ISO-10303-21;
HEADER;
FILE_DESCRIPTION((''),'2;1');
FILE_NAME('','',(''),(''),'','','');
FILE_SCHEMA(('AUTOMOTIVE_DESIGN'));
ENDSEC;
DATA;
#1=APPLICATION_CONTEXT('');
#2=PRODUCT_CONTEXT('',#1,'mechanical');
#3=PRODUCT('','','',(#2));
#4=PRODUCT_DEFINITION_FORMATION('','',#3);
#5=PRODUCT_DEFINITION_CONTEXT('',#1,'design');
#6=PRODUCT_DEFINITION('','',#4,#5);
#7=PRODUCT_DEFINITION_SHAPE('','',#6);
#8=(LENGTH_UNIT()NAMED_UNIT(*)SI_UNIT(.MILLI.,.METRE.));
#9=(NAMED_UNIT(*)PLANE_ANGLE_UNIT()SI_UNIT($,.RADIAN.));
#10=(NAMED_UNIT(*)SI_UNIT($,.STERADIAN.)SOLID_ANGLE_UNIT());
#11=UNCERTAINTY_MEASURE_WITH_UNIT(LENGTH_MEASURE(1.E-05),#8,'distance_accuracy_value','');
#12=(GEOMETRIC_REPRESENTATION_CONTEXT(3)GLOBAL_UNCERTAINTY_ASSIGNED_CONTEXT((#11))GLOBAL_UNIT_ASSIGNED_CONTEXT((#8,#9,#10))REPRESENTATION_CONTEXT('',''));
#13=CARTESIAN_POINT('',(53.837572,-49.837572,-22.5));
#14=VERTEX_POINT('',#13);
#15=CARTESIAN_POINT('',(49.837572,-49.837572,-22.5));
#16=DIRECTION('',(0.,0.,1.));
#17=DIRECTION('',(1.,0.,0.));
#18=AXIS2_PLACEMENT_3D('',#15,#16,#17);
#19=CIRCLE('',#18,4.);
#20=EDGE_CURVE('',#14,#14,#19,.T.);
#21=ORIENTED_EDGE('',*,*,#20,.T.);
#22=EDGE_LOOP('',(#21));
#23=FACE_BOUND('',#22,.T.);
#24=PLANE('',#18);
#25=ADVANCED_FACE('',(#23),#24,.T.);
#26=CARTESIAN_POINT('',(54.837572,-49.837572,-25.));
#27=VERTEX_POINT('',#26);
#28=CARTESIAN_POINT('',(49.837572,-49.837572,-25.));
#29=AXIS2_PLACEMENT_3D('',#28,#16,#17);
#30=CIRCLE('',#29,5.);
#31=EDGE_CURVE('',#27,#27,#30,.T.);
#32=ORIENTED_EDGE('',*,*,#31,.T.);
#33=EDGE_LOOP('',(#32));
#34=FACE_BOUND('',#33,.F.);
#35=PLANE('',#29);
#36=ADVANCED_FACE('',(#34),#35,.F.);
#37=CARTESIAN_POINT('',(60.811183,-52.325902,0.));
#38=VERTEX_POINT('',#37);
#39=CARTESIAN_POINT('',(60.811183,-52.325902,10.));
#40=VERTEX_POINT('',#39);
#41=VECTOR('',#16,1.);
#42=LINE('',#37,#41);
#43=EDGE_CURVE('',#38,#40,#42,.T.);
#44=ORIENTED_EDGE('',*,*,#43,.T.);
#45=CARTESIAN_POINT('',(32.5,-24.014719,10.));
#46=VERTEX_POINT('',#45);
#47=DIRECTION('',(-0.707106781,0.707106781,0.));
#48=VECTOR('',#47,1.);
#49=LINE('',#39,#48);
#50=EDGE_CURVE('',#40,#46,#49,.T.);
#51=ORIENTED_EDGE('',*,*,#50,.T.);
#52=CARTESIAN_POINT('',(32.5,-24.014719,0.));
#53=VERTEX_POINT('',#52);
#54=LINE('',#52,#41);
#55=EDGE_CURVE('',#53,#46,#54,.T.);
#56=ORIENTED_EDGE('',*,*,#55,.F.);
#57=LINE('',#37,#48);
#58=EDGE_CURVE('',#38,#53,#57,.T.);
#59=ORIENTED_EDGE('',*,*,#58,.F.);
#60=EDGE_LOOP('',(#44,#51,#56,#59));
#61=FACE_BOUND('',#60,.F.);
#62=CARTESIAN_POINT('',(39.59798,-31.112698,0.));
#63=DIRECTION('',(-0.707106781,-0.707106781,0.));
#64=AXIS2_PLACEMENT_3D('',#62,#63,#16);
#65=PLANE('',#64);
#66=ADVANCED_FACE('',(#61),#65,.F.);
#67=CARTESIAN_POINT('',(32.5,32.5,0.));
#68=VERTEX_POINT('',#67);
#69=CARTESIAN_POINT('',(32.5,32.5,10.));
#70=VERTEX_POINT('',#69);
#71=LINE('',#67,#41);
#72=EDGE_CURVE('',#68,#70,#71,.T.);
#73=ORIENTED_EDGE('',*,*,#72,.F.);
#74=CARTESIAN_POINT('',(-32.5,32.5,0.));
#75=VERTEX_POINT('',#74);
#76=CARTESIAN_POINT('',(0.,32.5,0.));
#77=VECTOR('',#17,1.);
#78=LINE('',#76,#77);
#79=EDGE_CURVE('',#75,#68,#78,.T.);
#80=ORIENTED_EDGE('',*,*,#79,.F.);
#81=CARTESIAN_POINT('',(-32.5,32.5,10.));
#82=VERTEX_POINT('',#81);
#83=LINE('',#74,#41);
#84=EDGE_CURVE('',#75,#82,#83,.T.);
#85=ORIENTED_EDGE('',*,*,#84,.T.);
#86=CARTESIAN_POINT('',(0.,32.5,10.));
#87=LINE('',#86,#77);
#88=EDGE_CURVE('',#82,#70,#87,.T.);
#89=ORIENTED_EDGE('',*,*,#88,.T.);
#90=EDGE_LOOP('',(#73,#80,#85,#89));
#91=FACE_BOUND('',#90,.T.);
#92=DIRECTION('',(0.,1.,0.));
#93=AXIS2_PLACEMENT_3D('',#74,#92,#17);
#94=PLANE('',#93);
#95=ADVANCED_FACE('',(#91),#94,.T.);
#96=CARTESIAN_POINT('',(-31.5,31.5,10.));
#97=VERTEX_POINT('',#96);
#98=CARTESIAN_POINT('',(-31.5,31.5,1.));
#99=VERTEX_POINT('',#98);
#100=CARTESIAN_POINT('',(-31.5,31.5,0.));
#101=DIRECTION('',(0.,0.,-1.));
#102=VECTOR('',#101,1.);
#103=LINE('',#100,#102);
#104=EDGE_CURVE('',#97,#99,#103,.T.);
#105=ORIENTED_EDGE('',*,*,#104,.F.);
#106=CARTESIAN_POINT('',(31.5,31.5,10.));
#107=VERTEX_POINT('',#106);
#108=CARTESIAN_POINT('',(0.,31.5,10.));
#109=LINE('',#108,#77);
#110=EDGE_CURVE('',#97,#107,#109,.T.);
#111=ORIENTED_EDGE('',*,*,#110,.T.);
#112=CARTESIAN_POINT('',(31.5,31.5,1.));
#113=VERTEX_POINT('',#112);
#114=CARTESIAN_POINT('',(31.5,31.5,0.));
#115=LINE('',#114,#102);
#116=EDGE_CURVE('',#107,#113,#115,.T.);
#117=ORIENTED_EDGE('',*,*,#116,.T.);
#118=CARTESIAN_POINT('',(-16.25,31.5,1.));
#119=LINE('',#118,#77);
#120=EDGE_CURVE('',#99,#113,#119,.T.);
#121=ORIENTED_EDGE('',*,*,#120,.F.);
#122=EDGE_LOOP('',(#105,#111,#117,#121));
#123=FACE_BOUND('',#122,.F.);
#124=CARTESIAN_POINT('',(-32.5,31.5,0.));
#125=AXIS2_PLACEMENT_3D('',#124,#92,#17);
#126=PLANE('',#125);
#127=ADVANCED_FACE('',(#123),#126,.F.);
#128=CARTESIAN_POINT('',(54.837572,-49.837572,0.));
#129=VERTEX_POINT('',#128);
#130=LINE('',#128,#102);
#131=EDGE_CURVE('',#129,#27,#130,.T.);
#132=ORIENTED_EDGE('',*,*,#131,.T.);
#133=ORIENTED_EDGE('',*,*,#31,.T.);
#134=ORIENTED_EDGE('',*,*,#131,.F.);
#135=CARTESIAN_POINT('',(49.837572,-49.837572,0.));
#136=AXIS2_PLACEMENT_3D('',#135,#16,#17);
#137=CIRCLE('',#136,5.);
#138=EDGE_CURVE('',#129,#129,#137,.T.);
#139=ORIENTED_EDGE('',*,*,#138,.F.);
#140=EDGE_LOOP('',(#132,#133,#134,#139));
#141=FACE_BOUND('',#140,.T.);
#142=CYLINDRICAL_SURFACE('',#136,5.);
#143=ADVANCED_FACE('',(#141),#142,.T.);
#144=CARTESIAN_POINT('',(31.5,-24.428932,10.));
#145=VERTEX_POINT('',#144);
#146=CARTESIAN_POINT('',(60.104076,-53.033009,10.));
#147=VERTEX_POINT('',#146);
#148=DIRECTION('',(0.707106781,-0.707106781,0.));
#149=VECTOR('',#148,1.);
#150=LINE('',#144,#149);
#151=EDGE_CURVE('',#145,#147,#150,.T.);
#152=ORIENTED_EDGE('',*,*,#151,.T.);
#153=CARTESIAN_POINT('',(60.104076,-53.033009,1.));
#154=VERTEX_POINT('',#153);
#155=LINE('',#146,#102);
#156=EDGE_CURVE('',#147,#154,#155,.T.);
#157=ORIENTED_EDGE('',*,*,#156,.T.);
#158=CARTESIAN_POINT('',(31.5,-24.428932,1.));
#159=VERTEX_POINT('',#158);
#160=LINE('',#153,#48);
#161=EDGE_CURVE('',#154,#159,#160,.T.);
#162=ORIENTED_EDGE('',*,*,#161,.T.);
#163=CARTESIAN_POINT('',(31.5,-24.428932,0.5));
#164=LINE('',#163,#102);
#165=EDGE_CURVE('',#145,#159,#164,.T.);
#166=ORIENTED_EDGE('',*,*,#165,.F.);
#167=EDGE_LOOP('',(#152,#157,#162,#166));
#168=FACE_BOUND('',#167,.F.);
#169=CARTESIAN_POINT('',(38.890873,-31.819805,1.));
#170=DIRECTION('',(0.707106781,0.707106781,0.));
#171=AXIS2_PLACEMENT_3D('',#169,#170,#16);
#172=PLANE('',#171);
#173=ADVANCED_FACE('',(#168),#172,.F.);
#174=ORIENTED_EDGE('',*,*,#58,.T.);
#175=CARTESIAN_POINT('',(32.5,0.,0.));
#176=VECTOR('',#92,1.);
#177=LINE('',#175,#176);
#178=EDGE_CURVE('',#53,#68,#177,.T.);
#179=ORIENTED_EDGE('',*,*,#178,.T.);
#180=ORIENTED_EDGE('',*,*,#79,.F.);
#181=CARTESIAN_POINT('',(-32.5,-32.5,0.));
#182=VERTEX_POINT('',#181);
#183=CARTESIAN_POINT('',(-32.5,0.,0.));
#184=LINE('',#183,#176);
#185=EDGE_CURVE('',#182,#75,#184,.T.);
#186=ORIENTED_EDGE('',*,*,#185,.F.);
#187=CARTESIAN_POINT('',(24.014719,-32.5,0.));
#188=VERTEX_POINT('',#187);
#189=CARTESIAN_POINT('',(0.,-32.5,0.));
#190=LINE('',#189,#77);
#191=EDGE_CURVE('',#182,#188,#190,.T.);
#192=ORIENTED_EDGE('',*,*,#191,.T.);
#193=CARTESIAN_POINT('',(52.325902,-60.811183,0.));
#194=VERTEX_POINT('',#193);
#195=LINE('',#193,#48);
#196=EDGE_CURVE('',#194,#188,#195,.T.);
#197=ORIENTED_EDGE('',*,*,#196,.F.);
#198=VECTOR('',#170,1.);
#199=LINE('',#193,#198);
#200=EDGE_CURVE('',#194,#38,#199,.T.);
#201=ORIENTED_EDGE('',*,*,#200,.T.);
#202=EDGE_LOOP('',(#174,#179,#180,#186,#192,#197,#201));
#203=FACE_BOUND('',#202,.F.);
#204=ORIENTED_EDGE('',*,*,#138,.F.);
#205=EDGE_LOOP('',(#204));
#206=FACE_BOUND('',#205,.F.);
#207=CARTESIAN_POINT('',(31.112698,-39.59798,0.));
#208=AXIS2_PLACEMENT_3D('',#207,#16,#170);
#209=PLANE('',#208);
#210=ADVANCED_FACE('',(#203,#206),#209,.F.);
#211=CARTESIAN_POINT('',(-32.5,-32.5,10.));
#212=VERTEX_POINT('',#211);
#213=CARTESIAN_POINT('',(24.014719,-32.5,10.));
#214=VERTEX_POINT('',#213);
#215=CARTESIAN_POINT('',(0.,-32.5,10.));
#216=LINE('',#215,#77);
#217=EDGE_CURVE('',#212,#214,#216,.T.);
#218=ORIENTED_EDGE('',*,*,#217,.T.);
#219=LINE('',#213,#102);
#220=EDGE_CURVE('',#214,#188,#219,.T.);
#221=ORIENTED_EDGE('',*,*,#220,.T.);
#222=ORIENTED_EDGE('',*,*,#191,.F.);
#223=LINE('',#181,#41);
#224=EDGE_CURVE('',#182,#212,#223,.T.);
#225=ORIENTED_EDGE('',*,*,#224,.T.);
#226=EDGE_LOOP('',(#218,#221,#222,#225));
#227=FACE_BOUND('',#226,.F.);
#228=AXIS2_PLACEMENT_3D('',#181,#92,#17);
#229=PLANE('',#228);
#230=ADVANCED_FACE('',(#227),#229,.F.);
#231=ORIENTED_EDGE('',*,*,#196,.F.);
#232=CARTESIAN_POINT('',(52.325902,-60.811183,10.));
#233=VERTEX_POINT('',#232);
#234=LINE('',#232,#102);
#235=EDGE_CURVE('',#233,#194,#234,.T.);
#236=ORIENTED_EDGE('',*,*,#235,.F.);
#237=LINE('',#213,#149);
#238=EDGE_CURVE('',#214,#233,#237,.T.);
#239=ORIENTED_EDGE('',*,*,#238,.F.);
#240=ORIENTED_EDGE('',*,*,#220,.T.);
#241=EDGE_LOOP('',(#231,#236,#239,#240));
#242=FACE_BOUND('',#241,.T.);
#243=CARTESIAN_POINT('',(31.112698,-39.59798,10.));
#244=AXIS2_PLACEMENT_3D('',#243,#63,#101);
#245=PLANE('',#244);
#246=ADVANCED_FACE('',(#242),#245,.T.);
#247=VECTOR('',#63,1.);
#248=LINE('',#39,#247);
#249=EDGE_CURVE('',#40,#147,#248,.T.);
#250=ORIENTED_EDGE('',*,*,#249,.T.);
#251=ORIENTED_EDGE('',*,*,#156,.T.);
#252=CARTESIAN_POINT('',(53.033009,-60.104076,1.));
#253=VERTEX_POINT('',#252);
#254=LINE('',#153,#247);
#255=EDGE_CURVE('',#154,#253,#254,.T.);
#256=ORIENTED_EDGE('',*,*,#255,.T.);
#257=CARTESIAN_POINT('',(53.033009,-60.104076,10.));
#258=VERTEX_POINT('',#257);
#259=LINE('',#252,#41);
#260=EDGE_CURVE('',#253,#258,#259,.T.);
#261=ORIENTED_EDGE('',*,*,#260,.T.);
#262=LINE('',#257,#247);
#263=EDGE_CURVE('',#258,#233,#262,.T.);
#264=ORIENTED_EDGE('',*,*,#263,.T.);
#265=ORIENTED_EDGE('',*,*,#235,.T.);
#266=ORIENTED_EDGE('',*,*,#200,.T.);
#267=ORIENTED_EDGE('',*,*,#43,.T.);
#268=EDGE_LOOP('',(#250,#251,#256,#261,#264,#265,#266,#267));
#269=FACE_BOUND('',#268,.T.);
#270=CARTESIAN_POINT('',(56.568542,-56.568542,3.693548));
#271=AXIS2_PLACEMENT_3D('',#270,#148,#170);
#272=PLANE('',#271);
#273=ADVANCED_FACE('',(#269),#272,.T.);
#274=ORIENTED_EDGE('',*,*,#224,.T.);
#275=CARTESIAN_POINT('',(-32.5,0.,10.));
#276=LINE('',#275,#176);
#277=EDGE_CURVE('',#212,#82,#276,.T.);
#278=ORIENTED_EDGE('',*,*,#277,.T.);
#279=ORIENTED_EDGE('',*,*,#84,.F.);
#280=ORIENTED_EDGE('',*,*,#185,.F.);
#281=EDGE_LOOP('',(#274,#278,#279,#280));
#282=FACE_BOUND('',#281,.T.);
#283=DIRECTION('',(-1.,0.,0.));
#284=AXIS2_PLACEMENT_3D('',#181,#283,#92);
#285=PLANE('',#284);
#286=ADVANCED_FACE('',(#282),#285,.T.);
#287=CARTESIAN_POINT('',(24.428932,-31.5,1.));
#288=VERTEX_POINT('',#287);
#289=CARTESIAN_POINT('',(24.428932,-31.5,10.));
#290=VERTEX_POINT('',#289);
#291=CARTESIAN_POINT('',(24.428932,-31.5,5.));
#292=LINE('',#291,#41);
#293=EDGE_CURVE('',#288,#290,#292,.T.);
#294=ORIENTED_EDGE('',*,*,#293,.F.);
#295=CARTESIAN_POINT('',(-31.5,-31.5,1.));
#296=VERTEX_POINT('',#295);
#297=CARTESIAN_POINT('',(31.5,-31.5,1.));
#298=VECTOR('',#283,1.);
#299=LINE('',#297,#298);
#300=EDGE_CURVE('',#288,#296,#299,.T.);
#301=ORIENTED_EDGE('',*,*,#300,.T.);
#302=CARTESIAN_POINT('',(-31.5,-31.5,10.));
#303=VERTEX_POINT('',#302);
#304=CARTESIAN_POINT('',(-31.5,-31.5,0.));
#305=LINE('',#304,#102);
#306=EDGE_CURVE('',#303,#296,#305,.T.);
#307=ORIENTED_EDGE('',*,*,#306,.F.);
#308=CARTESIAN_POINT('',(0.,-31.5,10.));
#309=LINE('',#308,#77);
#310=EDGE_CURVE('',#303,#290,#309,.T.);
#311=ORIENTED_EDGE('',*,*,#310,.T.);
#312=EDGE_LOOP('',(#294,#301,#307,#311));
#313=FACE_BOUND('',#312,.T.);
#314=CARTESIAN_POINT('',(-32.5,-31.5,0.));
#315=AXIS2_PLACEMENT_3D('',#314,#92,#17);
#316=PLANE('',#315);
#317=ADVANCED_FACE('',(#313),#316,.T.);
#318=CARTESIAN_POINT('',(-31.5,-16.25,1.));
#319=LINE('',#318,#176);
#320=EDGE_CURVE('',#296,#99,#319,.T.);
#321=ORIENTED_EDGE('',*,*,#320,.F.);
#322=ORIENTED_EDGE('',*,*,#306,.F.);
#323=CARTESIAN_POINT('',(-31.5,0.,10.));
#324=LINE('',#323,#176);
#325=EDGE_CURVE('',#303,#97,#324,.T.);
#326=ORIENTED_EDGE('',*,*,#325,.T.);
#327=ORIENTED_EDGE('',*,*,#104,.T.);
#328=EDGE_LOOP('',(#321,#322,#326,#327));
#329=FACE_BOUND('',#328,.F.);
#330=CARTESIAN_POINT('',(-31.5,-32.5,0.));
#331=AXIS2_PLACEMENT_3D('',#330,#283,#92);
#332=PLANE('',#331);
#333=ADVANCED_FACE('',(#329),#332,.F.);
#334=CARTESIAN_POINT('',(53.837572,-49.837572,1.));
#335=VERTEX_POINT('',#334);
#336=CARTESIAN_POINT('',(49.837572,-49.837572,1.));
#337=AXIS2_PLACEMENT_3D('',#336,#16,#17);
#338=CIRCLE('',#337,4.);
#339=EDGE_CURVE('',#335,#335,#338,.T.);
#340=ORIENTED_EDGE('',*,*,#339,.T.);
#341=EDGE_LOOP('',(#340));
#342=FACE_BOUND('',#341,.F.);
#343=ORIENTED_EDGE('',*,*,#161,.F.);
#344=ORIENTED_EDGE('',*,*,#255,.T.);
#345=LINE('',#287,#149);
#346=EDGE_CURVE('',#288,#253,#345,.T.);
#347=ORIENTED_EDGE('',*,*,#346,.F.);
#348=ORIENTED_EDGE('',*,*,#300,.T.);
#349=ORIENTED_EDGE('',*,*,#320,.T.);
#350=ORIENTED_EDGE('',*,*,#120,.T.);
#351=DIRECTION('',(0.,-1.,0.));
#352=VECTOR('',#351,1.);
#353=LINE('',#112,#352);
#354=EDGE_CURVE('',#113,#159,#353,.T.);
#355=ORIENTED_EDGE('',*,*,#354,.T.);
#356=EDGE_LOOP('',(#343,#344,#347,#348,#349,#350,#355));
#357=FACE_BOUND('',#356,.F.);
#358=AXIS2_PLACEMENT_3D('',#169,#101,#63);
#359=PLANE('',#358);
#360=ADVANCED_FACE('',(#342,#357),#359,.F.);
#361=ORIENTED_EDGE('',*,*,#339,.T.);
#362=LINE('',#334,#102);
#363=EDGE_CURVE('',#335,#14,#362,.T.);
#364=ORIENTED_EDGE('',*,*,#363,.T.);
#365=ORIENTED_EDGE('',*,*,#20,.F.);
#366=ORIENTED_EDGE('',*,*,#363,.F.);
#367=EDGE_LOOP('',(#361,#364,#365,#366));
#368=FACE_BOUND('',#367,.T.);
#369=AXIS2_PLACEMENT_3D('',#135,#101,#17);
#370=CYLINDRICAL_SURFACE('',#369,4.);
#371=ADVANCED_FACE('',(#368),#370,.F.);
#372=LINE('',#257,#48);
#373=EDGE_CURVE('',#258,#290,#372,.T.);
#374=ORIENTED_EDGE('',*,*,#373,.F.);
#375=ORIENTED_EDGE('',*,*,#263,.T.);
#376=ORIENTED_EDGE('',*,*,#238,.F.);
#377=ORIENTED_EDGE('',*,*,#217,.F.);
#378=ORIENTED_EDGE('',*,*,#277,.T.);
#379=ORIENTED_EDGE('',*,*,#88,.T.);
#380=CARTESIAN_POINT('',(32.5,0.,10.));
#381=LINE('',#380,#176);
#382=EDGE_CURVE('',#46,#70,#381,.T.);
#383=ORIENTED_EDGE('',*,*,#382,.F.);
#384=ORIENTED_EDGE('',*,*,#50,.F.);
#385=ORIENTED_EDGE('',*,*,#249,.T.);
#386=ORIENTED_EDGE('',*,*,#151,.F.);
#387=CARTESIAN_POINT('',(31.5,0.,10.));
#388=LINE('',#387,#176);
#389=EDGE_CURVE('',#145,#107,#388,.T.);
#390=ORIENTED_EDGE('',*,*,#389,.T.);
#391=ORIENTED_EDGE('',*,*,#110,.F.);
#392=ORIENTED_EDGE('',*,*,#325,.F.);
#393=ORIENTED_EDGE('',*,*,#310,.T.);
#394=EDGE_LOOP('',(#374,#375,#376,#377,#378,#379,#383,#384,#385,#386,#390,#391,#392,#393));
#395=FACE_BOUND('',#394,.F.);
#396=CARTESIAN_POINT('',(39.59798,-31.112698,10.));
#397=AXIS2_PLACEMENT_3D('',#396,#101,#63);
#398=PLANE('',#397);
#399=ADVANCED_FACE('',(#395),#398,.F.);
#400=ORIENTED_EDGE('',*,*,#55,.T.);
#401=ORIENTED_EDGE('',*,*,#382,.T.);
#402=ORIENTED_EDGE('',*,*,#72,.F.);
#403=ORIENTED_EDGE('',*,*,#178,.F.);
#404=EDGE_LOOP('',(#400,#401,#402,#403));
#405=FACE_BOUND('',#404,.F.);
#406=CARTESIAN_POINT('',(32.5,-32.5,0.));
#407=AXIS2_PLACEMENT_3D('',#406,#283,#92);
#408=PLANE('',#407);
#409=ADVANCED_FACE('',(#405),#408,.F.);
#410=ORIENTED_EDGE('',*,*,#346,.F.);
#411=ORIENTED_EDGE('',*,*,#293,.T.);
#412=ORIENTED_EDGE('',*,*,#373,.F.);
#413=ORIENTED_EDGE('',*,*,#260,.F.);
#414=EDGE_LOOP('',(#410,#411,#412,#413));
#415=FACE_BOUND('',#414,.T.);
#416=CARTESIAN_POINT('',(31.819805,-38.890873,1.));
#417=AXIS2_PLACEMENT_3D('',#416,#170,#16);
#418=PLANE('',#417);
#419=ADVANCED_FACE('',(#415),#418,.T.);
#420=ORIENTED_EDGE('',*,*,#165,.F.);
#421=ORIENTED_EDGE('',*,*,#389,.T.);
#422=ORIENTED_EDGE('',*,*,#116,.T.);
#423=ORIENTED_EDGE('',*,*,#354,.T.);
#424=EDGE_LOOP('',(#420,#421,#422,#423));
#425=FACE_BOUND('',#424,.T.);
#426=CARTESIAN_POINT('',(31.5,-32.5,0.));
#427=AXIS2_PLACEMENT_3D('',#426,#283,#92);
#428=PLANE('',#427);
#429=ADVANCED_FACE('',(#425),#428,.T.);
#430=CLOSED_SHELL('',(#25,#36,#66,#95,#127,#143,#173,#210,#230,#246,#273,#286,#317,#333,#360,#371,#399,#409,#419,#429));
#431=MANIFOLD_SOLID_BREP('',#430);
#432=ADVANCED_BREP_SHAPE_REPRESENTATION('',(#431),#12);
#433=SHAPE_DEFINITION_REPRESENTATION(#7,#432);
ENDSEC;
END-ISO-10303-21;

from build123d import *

# Parameters (mm, degrees)
F0_W           = 65
F0_H           = 65
F1_DEPTH       = 10
F2_T           = -1
F6_DEPTH       = 10.0380592229
F6_DEPTH_BACK  = 30
F8_DEPTH       = 64.9
F8_DEPTH_BACK  = 36.001
F9_R           = 5
F10_DEPTH      = 25
F10_DEPTH_BACK = 1
F11_R          = 4
F12_DEPTH      = 1
F12_DEPTH_BACK = 22.5


with BuildPart() as f1:
    # F0 (on Top) → F1 (new body)
    with BuildSketch(Plane.XY):
        Rectangle(F0_W, F0_H)
    extrude(amount=F1_DEPTH)

    # F2
    f2_openings = [f1.faces().sort_by_distance(p)[0] for p in [
        (0, 0, 10),
    ]]
    offset(amount=F2_T, openings=f2_openings)

    # F5 (on face) → F6 (join, two sides)
    with BuildSketch(Plane(origin=(35.3553390593, -35.3553390593, 0), x_dir=(0.7071067812, 0.7071067812, 0), z_dir=(0.7071067812, -0.7071067812, 0))) as f6_sk:
        Polygon((6, 10), (5, 10), (5, 1), (-5, 1), (-5, 10), (-6, 10), (-6, 0), (6, 0), align=None)
    extrude(amount=-F6_DEPTH)
    extrude(f6_sk.sketch, amount=F6_DEPTH_BACK)

    # F7 (on face) → F8 (cut, two sides)
    with BuildSketch(Plane(origin=(35.3553390593, -35.3553390593, 0), x_dir=(0.7071067812, 0.7071067812, 0), z_dir=(0.7071067812, -0.7071067812, 0))) as f8_sk:
        Polygon((0, 10), (-5, 10), (-5, 1), (5, 1), (5, 10), align=None)
    extrude(amount=-F8_DEPTH, mode=Mode.SUBTRACT)
    extrude(f8_sk.sketch, amount=F8_DEPTH_BACK, mode=Mode.SUBTRACT)

    # F9 (on Top) → F10 (join, two sides)
    with BuildSketch(Plane.XY) as f10_sk:
        with Locations((49.8375721066, -49.8375721066)):
            Circle(F9_R)
    extrude(amount=-F10_DEPTH)
    extrude(f10_sk.sketch, amount=F10_DEPTH_BACK)

    # F11 (on Top) → F12 (cut, two sides)
    with BuildSketch(Plane.XY) as f12_sk:
        with Locations((49.8375721066, -49.8375721066)):
            Circle(F11_R)
    extrude(amount=F12_DEPTH, mode=Mode.SUBTRACT)
    extrude(f12_sk.sketch, amount=-F12_DEPTH_BACK, mode=Mode.SUBTRACT)


solid = f1.part
